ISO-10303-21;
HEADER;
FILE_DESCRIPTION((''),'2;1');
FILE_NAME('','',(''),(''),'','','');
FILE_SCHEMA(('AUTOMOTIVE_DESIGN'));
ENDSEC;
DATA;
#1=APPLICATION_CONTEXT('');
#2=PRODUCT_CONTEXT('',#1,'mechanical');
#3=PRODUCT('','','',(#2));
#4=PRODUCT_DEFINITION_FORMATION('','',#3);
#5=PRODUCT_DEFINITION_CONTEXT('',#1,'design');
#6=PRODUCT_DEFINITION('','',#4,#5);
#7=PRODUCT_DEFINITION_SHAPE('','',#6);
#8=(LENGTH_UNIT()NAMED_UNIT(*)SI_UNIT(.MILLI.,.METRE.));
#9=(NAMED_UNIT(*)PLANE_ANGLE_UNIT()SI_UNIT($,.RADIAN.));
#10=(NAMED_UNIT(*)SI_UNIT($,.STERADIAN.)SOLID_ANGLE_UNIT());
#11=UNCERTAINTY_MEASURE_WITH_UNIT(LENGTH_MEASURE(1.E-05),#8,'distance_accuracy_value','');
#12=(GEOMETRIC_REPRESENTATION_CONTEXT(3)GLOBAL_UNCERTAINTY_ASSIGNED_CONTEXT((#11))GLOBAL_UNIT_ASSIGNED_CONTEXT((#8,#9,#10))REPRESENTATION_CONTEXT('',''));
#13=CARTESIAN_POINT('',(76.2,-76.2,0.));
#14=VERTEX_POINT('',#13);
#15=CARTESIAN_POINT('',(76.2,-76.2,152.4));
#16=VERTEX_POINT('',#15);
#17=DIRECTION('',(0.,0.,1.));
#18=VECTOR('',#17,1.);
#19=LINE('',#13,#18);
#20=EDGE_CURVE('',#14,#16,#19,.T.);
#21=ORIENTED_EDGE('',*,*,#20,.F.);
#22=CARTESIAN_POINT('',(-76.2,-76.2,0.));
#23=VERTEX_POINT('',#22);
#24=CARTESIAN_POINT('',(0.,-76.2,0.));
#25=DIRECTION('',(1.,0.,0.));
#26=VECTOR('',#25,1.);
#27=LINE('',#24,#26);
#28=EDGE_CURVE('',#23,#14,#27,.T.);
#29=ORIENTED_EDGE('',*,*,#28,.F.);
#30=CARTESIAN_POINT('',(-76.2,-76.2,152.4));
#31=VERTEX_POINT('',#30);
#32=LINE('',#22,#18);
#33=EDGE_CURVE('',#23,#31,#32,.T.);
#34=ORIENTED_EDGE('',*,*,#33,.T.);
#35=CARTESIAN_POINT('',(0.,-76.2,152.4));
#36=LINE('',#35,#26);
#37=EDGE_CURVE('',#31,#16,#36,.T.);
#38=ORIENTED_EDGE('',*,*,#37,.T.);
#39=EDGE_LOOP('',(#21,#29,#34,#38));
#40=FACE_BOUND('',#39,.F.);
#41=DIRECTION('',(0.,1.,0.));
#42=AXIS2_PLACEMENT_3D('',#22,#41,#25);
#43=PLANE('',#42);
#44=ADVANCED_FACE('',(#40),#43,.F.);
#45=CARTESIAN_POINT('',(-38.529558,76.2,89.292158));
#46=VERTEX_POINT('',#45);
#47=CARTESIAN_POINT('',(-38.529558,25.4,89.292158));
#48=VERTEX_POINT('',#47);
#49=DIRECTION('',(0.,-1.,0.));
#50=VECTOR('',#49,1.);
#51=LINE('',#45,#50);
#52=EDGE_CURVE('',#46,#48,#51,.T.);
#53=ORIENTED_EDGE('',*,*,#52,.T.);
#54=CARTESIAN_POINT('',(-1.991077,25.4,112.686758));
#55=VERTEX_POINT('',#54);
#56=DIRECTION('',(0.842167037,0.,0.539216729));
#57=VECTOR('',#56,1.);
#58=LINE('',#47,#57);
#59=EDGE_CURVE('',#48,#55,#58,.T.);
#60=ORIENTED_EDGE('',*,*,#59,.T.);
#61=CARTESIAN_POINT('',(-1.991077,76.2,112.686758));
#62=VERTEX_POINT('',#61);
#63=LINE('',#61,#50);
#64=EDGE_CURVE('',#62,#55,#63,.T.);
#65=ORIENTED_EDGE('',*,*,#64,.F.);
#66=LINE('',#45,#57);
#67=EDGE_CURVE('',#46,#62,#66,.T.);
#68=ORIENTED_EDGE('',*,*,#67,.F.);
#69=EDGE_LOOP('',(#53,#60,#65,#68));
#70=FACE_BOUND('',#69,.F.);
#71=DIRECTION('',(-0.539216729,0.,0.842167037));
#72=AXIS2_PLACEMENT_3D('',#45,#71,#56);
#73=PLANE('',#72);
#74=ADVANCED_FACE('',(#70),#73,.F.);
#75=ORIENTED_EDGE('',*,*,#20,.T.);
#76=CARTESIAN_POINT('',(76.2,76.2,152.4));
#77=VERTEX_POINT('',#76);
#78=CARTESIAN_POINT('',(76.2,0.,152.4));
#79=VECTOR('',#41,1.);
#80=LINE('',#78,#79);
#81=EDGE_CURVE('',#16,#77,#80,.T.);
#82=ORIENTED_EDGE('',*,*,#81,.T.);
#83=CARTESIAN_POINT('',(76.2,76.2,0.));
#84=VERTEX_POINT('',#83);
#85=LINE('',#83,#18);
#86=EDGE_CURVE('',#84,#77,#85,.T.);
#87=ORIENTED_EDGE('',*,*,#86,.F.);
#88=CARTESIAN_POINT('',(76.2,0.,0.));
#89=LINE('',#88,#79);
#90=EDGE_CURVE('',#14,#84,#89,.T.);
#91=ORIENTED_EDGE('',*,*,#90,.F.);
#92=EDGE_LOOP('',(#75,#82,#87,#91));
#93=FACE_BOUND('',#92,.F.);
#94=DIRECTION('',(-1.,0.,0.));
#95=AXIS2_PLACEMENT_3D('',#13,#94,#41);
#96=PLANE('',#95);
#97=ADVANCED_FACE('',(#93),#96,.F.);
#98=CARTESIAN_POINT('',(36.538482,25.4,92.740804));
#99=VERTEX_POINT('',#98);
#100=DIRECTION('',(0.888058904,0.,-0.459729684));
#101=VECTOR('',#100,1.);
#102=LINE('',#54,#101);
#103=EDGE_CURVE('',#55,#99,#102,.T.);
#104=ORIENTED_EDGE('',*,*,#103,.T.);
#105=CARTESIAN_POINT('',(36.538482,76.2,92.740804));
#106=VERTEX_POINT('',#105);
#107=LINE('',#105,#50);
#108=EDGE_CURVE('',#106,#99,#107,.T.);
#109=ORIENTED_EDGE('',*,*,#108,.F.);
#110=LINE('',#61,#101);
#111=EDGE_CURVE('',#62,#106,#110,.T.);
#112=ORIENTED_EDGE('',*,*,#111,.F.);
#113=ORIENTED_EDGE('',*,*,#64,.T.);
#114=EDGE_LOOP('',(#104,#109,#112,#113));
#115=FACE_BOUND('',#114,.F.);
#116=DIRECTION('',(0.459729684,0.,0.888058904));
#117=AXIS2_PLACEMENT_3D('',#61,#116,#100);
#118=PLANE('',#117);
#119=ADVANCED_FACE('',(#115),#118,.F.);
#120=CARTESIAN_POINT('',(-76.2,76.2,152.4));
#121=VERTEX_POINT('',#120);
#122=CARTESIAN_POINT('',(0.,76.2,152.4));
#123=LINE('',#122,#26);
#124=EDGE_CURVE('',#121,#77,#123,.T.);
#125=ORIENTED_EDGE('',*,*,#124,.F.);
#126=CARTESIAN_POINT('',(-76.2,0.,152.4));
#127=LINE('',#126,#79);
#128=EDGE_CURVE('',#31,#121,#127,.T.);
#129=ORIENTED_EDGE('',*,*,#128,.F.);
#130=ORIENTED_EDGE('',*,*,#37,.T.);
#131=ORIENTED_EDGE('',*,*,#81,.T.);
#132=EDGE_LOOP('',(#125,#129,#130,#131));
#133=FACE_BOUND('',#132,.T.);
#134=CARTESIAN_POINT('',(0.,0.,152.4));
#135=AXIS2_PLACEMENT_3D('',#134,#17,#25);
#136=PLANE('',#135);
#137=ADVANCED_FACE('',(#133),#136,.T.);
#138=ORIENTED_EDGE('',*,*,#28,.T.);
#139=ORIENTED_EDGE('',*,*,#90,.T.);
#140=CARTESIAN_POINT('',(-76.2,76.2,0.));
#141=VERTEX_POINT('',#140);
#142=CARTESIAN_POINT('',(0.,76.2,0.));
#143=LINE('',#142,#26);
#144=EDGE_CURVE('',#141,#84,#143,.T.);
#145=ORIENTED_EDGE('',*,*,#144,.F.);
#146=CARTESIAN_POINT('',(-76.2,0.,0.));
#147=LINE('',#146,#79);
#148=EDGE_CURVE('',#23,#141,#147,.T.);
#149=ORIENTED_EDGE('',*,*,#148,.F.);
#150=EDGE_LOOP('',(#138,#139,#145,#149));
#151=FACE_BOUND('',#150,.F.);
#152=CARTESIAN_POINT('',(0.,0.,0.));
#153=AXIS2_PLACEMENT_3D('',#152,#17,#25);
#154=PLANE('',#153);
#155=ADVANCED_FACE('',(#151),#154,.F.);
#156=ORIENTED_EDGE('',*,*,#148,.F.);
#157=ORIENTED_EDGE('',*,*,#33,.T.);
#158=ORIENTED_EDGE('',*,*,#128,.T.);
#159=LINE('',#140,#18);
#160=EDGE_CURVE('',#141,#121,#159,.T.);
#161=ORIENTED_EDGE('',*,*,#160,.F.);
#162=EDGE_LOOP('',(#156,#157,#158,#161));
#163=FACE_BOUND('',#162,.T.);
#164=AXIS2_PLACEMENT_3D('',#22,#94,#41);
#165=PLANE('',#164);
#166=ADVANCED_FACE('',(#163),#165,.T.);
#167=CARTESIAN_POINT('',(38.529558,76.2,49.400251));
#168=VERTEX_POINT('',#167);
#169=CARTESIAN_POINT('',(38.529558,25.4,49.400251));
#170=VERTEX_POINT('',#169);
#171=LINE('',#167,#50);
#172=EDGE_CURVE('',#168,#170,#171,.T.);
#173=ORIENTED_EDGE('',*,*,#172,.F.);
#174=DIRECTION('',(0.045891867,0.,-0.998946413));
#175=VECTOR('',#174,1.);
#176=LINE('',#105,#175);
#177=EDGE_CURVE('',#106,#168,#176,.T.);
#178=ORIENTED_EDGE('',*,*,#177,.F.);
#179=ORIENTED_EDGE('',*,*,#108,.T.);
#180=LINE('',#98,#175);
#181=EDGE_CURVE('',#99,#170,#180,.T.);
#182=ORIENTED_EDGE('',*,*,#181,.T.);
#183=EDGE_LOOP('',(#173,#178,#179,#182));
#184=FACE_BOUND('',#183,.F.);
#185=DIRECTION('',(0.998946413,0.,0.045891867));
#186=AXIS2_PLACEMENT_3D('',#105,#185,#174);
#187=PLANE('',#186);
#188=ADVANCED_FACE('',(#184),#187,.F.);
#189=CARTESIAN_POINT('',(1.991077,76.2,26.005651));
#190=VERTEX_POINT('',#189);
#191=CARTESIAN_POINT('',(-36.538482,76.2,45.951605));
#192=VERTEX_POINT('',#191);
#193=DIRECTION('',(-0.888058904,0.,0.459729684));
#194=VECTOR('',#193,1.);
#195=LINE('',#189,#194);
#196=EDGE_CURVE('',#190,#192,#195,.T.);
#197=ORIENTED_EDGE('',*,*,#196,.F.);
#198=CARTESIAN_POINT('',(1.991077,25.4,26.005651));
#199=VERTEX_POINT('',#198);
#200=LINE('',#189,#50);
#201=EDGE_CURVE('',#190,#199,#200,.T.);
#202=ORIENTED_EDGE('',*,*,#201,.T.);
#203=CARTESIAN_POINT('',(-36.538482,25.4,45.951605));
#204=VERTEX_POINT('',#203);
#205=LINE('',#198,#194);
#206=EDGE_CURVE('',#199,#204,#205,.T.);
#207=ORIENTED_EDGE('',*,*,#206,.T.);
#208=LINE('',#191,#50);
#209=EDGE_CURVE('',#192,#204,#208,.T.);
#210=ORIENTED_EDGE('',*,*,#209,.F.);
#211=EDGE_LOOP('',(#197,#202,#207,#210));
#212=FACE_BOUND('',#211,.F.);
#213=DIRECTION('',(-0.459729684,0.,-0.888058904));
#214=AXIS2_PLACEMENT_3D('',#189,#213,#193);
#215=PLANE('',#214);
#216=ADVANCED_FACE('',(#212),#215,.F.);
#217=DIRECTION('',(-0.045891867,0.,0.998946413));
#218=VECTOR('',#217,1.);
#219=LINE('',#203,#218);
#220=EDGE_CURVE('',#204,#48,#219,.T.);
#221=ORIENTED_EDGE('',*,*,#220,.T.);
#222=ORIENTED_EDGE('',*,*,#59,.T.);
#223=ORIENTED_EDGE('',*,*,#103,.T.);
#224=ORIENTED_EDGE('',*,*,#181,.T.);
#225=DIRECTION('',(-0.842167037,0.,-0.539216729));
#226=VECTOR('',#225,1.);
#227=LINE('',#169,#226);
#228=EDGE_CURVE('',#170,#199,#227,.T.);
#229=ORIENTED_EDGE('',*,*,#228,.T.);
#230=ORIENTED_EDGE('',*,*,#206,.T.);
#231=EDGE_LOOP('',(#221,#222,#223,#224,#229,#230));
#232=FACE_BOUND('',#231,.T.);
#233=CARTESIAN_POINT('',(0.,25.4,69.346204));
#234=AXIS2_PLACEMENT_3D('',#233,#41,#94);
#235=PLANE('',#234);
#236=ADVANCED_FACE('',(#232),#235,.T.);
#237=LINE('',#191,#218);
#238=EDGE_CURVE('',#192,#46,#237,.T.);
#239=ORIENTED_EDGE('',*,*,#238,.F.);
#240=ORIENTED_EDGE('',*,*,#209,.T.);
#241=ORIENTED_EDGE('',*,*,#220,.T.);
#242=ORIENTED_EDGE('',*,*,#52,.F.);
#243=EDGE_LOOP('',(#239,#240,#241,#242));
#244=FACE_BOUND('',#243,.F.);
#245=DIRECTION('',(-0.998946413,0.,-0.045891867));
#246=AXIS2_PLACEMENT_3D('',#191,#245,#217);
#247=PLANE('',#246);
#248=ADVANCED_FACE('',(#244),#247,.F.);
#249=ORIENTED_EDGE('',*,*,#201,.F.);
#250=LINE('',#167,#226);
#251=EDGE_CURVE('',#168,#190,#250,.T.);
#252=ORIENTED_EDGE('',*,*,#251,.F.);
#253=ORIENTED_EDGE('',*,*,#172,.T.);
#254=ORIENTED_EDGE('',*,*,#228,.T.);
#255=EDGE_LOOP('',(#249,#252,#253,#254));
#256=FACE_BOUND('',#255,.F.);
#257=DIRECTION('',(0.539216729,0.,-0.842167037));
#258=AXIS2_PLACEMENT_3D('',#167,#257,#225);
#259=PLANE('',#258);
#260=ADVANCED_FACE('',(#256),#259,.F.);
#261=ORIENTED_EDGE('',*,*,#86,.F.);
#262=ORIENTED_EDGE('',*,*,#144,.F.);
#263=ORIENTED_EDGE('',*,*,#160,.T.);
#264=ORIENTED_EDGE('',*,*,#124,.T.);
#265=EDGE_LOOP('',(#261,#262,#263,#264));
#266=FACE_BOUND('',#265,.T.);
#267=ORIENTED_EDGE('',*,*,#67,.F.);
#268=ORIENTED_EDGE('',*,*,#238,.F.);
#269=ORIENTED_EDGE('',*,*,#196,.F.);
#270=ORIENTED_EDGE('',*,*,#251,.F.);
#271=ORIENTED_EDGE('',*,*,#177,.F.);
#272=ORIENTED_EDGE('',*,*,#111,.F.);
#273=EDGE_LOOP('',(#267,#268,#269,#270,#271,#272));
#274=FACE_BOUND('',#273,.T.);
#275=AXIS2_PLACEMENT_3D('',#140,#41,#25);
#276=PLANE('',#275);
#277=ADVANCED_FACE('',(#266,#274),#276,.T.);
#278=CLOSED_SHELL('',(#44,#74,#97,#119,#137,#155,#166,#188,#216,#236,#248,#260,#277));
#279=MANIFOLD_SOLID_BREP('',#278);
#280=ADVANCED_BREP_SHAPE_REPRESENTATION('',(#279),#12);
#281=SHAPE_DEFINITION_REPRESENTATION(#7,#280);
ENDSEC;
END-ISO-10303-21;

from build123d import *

# Parameters (mm, degrees)
F0_W     = 152.4
F0_H     = 152.4
F1_DEPTH = 152.4
F5_DEPTH = 50.8


# Not quite as in the source:
# - the program builds the solid bodies; features that only make, move or delete a surface that nothing else refers to are left out


with BuildPart() as f1:
    # F0 (on Top) → F1 (new body)
    with BuildSketch(Plane.XY):
        Rectangle(F0_W, F0_H)
    extrude(amount=F1_DEPTH)

    # F4 (on face) → F5 (cut)
    with BuildSketch(Plane(origin=(0, 76.2, 0), x_dir=(-1, 0, 0), z_dir=(0, 1, 0))):
        Polygon((-1.9910766715, 26.005651243), (36.5384817123, 45.9516048431), (38.5295583838, 89.2921580002), (1.9910766715, 112.6867575571), (-36.5384817123, 92.740803957), (-38.5295583838, 49.4002507999), align=None)
    extrude(amount=-F5_DEPTH, mode=Mode.SUBTRACT)


solid = f1.part
